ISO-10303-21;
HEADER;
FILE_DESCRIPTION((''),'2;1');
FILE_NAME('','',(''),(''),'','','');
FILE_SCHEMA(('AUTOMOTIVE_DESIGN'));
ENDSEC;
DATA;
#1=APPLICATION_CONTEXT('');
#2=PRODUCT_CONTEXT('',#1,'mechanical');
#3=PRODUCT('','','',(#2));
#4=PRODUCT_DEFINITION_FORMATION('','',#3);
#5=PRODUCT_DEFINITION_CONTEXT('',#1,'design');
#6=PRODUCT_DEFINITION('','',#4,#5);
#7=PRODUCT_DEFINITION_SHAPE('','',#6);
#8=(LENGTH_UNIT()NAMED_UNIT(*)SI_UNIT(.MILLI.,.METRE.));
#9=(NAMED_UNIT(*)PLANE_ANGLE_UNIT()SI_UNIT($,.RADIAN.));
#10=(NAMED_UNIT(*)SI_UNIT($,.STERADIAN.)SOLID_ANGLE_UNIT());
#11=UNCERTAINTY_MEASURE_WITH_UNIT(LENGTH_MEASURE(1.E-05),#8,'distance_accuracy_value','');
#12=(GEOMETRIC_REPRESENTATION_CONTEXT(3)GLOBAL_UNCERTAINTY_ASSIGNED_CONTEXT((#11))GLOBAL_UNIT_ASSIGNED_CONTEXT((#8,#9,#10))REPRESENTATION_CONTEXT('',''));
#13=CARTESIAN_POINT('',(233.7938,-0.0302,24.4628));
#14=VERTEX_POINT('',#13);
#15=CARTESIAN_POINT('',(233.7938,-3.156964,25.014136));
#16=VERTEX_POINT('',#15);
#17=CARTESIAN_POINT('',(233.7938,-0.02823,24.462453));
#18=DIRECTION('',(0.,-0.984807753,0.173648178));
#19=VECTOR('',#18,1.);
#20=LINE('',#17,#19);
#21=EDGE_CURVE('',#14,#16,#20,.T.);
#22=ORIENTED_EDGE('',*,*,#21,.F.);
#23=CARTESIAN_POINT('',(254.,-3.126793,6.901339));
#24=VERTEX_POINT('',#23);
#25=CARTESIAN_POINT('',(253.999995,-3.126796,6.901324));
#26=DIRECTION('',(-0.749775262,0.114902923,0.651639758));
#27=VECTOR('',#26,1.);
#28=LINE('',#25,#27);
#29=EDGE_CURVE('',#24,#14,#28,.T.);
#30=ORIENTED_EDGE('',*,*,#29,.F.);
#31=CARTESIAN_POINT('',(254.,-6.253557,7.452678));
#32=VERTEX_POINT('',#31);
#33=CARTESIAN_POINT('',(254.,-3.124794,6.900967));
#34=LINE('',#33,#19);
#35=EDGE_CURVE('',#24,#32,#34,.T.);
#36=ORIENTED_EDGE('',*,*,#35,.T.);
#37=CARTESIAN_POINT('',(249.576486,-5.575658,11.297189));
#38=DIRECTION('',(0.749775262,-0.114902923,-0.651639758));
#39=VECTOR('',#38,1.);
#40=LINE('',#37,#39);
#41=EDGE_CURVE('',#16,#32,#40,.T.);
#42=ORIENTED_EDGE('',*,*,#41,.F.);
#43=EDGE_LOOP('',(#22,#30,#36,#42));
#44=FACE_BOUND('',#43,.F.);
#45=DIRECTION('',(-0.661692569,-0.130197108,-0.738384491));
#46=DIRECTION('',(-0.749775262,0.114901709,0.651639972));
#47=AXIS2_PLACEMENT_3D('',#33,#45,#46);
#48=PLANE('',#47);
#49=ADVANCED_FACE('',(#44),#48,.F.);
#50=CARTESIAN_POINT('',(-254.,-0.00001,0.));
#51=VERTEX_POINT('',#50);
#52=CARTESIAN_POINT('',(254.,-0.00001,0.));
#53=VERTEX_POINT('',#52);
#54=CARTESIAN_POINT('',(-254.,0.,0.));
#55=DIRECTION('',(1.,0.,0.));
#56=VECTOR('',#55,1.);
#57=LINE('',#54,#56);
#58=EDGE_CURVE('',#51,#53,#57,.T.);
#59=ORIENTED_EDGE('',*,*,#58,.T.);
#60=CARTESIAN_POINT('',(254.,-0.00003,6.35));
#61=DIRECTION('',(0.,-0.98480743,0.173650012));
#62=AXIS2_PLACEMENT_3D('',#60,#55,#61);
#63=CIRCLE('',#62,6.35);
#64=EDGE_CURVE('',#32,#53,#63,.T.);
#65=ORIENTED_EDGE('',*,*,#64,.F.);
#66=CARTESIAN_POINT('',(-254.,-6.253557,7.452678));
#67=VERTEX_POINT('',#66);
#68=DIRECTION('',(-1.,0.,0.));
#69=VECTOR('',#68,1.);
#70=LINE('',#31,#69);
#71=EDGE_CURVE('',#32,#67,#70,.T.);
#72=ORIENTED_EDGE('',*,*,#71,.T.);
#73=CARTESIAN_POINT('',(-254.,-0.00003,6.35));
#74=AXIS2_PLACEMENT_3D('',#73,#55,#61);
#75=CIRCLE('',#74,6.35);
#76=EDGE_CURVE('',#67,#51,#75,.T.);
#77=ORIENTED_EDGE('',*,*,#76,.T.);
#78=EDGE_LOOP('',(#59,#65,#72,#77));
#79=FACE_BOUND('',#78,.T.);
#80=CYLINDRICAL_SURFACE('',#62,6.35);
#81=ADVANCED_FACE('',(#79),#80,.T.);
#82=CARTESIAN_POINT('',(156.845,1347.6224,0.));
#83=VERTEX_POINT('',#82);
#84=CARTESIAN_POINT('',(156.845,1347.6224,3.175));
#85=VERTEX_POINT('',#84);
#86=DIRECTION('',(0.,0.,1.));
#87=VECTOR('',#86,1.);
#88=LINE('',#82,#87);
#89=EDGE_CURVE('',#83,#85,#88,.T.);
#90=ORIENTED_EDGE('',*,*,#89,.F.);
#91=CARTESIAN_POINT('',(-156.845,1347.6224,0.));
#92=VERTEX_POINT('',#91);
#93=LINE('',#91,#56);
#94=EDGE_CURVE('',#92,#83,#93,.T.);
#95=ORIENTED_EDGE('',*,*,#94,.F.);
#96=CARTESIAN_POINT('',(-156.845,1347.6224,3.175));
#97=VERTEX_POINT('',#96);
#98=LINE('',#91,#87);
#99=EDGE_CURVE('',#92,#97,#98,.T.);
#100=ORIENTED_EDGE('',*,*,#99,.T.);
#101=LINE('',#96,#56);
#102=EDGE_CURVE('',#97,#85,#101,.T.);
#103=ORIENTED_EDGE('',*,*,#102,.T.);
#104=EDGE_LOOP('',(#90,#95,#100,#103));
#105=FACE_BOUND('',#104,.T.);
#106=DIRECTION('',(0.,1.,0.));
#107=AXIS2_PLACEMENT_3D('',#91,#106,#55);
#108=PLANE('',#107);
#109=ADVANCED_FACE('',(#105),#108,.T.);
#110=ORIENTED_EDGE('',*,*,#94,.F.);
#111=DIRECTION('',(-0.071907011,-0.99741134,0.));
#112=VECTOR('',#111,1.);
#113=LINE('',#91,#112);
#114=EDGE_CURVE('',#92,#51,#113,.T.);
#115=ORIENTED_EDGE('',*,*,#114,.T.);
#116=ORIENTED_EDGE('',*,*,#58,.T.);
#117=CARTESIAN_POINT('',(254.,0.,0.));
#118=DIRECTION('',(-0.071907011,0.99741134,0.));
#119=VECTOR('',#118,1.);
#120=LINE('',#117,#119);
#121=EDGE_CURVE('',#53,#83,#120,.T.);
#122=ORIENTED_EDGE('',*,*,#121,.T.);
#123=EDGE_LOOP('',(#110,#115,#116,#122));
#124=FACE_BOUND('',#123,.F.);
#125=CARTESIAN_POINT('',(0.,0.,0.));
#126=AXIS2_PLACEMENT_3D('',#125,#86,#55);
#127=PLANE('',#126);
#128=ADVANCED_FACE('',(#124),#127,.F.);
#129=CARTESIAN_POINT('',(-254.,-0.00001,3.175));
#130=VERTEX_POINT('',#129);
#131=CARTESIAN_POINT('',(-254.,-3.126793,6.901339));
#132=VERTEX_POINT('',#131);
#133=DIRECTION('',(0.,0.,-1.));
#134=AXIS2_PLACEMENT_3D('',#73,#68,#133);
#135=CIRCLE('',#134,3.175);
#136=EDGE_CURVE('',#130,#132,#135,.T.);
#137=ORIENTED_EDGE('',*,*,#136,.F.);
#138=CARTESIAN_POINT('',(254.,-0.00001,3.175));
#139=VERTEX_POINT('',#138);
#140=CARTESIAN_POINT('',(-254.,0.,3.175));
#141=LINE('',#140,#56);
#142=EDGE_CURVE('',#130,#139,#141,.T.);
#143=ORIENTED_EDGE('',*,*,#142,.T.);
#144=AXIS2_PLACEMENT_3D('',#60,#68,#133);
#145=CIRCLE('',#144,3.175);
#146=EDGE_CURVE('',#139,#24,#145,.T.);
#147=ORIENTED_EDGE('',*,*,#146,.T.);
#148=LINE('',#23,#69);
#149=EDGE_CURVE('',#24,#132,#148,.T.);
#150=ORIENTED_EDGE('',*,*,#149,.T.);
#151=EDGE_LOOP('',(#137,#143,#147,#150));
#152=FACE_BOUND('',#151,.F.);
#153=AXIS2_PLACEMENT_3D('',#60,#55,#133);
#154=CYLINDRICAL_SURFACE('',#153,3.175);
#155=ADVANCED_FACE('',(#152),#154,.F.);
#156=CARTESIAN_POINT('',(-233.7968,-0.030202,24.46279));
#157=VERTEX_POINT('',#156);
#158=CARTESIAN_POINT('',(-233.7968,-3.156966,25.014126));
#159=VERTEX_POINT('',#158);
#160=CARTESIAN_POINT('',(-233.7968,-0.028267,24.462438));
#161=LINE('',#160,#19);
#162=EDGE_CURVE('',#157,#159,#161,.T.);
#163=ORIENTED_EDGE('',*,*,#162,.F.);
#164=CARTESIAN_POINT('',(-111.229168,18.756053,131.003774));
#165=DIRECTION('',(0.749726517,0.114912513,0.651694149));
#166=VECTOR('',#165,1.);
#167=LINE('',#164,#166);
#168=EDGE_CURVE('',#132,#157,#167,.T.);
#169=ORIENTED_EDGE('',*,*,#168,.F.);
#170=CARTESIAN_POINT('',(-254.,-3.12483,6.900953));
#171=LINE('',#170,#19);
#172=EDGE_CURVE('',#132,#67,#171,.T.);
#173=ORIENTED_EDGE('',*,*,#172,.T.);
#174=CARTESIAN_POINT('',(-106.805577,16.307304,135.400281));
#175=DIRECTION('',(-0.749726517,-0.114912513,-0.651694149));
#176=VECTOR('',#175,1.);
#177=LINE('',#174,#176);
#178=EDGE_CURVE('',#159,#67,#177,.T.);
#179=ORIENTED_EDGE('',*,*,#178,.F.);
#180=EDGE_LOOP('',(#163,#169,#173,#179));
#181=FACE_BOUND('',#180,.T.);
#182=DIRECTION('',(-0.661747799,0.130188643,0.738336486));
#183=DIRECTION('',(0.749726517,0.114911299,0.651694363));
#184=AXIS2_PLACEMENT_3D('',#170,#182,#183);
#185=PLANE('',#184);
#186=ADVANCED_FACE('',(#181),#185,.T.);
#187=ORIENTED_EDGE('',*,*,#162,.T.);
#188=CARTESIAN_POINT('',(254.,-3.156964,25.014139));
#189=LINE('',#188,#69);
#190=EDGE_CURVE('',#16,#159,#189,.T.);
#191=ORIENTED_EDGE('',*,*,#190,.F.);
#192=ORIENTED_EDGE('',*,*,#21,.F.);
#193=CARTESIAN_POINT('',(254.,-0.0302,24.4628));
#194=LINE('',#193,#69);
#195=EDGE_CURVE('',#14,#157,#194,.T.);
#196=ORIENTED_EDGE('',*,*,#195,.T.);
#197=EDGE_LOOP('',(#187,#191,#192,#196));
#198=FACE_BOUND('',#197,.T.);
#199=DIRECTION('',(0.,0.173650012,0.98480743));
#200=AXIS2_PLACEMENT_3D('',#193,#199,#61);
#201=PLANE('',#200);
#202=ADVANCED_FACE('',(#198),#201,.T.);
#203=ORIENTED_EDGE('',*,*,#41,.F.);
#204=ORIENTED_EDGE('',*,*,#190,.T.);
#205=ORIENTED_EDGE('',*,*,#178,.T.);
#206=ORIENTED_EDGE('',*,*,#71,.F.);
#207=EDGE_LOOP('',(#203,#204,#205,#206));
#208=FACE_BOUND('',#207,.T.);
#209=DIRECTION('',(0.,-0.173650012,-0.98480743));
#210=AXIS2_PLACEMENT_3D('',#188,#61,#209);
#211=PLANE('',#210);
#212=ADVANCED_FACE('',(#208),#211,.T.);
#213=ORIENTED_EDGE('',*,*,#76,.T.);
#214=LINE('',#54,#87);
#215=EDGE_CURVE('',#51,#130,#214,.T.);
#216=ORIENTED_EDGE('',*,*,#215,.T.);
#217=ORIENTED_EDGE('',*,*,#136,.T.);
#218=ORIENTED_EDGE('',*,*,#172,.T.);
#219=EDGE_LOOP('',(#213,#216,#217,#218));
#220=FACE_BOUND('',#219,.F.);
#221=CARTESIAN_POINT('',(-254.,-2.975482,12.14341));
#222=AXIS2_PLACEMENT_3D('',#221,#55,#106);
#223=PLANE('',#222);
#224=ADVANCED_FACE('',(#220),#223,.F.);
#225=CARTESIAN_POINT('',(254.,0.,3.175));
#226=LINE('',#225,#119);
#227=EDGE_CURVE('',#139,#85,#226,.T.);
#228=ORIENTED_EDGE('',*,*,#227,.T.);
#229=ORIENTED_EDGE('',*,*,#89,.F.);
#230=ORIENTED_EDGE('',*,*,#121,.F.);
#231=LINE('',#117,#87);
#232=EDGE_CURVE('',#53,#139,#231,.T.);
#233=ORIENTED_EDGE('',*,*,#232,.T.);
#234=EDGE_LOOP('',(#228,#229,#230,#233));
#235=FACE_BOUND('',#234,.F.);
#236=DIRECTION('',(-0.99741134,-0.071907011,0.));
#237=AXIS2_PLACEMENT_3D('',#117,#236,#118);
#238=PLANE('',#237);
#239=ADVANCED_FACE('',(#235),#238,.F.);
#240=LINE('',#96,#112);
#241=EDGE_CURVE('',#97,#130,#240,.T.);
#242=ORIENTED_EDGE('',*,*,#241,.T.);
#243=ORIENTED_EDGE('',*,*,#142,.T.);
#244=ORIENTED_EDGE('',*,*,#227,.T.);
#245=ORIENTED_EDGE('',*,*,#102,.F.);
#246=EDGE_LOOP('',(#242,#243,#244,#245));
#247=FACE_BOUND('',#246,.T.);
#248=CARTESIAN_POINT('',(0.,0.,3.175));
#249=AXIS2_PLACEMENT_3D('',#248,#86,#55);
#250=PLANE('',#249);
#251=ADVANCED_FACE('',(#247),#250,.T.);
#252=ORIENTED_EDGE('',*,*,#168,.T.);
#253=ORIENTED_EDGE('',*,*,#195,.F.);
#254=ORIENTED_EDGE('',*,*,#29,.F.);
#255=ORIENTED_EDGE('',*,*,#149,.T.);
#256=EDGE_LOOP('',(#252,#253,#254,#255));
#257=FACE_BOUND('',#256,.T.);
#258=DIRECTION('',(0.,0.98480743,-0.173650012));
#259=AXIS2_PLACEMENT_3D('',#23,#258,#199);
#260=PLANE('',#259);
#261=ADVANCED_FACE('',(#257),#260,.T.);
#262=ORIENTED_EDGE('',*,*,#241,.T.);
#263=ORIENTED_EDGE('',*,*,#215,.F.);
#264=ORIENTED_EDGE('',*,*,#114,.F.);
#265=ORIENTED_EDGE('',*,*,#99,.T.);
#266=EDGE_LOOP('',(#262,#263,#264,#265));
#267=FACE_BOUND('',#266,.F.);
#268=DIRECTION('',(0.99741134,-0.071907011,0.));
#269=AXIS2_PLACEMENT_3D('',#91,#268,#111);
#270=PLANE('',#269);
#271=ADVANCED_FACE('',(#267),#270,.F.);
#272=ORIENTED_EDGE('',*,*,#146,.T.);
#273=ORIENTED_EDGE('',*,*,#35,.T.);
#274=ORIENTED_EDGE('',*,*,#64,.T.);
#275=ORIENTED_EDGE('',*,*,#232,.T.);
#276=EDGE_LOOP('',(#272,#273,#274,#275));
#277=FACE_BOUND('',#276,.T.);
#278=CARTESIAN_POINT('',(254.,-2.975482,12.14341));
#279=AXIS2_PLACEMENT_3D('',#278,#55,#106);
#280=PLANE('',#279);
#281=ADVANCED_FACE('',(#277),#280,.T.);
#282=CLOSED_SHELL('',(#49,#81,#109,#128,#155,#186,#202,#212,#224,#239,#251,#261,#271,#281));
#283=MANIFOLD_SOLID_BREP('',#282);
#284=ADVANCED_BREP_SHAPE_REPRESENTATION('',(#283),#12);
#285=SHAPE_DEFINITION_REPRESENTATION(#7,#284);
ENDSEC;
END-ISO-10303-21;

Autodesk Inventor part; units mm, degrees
ref_plane "YZ Plane" through (0, 0, 0) normal (1, 0, 0) x (0, 1, 0)
ref_plane "XZ Plane" through (0, 0, 0) normal (0, 1, 0) x (-1, 0, 0)
ref_plane "XY Plane" through (0, 0, 0) normal (0, 0, 1) x (1, 0, 0)
sketch "Sketch1" plane through (0, 0, 0) normal (0, 0, 1) x (1, 0, 0)
  line L0 (-254, 0) -> (254, 0)
  line L1 (-156.845, 1347.6224) -> (156.845, 1347.6224)
  line L2 (-156.845, 1347.6224) -> (-254, 0)
  line L3 (254, 0) -> (156.845, 1347.6224)
  point P0 (0, 0)
  point P1 (0, 0)
  point P2 (0, 1347.6224)
  dimension "d0" = 508
  dimension "d1" = 313.69
  dimension "d2" = 1347.6224
extrude "Plate1" add sketch "Sketch1" along normal blind 3.175
sketch "Sketch3" plane through (254, -3.1268, 6.9013) normal (0, -0.9848078, 0.1736482) x (1, 0, 0)
  line L0 (-508, 0) -> (0, 0)
  line L1 (0, 0) -> (0, 17.8324)
  line L2 (0, 17.8324) -> (-508, 17.8324)
  line L3 (-508, 17.8324) -> (-508, 0)
edge flange "Flange2" height 25.4 angle 100 thickness 3.175 bend radius 3.175 thickness toward (0, -0.9848078, 0.1736482) relief tear relief width 3.175 relief depth 1.5875 edges at (0, 0, 3.175) wall of the first edge with corners at (-254, -3.1268, 6.9013) (254, -3.1268, 6.9013) (254, -0.0302, 24.4628) (-254, -0.0302, 24.4628)
bend "Bend2"
corner "Corner2"
sketch "Sketch4" plane through (-254, -0.0302, 24.4628) normal (0, 0.9848078, -0.1736482) x (1, 0, 0)
  line L0 (508, 17.8324) -> (0, 17.8324) projected
  line L1 (508, 17.8324) -> (487.7938, 0)
  line L2 (0, 0) -> (508, 0) projected
  line L3 (487.7938, 0) -> (508, 0)
  line L4 (508, 0) -> (508, 17.8324) projected
  line L5 (508, 0) -> (508, 17.8324)
  line L6 (508, 17.8324) -> (487.7938, 0)
  point P0 (254, 24.0859)
extrude "Cut1" cut sketch "Sketch4" against normal blind 3.175
sketch "Sketch5" plane through (-254, -3.1268, 6.9013) normal (0, 0.9848078, -0.1736482) x (1, 0, 0)
  line L0 (0, -17.8324) -> (0, 0) projected
  line L1 (0, 0) -> (20.2032, -17.8324)
  line L2 (0, -17.8324) -> (487.7938, -17.8324) projected
  point P0 (254, 6.2535)
extrude "Cut2" cut sketch "Sketch5" against normal blind 3.175
equation "\"d24\" = Thickness"
equation "\"d26\" = Thickness"
equation "\"d14\" = BendReliefWidth"
equation "\"d15\" = BendReliefDepth"
equation "\"d16\" = MinimumRemnant"
equation "\"d17\" = BendRadius"
equation "\"d20\" = BendRadius"
equation "\"d21\" = CornerReliefSize"
equation "\"d22\" = GapSize"
equation "\"d23\" = JacobiRadiusSize"
equation "\"BendRadius\" = Thickness"
equation "\"BendReliefWidth\" = Thickness"
equation "\"BendReliefDepth\" = 0.5 * Thickness"
equation "\"CornerReliefSize\" = 4 * Thickness"
equation "\"MinimumRemnant\" = 2 * Thickness"
equation "\"TransitionRadius\" = BendRadius"
equation "\"JacobiRadiusSize\" = BendRadius"
equation "\"GapSize\" = Thickness"
equation "\"d3\" = BendRadius"
equation "\"Thickness\" = 3.175"
properties part number "robot side"
